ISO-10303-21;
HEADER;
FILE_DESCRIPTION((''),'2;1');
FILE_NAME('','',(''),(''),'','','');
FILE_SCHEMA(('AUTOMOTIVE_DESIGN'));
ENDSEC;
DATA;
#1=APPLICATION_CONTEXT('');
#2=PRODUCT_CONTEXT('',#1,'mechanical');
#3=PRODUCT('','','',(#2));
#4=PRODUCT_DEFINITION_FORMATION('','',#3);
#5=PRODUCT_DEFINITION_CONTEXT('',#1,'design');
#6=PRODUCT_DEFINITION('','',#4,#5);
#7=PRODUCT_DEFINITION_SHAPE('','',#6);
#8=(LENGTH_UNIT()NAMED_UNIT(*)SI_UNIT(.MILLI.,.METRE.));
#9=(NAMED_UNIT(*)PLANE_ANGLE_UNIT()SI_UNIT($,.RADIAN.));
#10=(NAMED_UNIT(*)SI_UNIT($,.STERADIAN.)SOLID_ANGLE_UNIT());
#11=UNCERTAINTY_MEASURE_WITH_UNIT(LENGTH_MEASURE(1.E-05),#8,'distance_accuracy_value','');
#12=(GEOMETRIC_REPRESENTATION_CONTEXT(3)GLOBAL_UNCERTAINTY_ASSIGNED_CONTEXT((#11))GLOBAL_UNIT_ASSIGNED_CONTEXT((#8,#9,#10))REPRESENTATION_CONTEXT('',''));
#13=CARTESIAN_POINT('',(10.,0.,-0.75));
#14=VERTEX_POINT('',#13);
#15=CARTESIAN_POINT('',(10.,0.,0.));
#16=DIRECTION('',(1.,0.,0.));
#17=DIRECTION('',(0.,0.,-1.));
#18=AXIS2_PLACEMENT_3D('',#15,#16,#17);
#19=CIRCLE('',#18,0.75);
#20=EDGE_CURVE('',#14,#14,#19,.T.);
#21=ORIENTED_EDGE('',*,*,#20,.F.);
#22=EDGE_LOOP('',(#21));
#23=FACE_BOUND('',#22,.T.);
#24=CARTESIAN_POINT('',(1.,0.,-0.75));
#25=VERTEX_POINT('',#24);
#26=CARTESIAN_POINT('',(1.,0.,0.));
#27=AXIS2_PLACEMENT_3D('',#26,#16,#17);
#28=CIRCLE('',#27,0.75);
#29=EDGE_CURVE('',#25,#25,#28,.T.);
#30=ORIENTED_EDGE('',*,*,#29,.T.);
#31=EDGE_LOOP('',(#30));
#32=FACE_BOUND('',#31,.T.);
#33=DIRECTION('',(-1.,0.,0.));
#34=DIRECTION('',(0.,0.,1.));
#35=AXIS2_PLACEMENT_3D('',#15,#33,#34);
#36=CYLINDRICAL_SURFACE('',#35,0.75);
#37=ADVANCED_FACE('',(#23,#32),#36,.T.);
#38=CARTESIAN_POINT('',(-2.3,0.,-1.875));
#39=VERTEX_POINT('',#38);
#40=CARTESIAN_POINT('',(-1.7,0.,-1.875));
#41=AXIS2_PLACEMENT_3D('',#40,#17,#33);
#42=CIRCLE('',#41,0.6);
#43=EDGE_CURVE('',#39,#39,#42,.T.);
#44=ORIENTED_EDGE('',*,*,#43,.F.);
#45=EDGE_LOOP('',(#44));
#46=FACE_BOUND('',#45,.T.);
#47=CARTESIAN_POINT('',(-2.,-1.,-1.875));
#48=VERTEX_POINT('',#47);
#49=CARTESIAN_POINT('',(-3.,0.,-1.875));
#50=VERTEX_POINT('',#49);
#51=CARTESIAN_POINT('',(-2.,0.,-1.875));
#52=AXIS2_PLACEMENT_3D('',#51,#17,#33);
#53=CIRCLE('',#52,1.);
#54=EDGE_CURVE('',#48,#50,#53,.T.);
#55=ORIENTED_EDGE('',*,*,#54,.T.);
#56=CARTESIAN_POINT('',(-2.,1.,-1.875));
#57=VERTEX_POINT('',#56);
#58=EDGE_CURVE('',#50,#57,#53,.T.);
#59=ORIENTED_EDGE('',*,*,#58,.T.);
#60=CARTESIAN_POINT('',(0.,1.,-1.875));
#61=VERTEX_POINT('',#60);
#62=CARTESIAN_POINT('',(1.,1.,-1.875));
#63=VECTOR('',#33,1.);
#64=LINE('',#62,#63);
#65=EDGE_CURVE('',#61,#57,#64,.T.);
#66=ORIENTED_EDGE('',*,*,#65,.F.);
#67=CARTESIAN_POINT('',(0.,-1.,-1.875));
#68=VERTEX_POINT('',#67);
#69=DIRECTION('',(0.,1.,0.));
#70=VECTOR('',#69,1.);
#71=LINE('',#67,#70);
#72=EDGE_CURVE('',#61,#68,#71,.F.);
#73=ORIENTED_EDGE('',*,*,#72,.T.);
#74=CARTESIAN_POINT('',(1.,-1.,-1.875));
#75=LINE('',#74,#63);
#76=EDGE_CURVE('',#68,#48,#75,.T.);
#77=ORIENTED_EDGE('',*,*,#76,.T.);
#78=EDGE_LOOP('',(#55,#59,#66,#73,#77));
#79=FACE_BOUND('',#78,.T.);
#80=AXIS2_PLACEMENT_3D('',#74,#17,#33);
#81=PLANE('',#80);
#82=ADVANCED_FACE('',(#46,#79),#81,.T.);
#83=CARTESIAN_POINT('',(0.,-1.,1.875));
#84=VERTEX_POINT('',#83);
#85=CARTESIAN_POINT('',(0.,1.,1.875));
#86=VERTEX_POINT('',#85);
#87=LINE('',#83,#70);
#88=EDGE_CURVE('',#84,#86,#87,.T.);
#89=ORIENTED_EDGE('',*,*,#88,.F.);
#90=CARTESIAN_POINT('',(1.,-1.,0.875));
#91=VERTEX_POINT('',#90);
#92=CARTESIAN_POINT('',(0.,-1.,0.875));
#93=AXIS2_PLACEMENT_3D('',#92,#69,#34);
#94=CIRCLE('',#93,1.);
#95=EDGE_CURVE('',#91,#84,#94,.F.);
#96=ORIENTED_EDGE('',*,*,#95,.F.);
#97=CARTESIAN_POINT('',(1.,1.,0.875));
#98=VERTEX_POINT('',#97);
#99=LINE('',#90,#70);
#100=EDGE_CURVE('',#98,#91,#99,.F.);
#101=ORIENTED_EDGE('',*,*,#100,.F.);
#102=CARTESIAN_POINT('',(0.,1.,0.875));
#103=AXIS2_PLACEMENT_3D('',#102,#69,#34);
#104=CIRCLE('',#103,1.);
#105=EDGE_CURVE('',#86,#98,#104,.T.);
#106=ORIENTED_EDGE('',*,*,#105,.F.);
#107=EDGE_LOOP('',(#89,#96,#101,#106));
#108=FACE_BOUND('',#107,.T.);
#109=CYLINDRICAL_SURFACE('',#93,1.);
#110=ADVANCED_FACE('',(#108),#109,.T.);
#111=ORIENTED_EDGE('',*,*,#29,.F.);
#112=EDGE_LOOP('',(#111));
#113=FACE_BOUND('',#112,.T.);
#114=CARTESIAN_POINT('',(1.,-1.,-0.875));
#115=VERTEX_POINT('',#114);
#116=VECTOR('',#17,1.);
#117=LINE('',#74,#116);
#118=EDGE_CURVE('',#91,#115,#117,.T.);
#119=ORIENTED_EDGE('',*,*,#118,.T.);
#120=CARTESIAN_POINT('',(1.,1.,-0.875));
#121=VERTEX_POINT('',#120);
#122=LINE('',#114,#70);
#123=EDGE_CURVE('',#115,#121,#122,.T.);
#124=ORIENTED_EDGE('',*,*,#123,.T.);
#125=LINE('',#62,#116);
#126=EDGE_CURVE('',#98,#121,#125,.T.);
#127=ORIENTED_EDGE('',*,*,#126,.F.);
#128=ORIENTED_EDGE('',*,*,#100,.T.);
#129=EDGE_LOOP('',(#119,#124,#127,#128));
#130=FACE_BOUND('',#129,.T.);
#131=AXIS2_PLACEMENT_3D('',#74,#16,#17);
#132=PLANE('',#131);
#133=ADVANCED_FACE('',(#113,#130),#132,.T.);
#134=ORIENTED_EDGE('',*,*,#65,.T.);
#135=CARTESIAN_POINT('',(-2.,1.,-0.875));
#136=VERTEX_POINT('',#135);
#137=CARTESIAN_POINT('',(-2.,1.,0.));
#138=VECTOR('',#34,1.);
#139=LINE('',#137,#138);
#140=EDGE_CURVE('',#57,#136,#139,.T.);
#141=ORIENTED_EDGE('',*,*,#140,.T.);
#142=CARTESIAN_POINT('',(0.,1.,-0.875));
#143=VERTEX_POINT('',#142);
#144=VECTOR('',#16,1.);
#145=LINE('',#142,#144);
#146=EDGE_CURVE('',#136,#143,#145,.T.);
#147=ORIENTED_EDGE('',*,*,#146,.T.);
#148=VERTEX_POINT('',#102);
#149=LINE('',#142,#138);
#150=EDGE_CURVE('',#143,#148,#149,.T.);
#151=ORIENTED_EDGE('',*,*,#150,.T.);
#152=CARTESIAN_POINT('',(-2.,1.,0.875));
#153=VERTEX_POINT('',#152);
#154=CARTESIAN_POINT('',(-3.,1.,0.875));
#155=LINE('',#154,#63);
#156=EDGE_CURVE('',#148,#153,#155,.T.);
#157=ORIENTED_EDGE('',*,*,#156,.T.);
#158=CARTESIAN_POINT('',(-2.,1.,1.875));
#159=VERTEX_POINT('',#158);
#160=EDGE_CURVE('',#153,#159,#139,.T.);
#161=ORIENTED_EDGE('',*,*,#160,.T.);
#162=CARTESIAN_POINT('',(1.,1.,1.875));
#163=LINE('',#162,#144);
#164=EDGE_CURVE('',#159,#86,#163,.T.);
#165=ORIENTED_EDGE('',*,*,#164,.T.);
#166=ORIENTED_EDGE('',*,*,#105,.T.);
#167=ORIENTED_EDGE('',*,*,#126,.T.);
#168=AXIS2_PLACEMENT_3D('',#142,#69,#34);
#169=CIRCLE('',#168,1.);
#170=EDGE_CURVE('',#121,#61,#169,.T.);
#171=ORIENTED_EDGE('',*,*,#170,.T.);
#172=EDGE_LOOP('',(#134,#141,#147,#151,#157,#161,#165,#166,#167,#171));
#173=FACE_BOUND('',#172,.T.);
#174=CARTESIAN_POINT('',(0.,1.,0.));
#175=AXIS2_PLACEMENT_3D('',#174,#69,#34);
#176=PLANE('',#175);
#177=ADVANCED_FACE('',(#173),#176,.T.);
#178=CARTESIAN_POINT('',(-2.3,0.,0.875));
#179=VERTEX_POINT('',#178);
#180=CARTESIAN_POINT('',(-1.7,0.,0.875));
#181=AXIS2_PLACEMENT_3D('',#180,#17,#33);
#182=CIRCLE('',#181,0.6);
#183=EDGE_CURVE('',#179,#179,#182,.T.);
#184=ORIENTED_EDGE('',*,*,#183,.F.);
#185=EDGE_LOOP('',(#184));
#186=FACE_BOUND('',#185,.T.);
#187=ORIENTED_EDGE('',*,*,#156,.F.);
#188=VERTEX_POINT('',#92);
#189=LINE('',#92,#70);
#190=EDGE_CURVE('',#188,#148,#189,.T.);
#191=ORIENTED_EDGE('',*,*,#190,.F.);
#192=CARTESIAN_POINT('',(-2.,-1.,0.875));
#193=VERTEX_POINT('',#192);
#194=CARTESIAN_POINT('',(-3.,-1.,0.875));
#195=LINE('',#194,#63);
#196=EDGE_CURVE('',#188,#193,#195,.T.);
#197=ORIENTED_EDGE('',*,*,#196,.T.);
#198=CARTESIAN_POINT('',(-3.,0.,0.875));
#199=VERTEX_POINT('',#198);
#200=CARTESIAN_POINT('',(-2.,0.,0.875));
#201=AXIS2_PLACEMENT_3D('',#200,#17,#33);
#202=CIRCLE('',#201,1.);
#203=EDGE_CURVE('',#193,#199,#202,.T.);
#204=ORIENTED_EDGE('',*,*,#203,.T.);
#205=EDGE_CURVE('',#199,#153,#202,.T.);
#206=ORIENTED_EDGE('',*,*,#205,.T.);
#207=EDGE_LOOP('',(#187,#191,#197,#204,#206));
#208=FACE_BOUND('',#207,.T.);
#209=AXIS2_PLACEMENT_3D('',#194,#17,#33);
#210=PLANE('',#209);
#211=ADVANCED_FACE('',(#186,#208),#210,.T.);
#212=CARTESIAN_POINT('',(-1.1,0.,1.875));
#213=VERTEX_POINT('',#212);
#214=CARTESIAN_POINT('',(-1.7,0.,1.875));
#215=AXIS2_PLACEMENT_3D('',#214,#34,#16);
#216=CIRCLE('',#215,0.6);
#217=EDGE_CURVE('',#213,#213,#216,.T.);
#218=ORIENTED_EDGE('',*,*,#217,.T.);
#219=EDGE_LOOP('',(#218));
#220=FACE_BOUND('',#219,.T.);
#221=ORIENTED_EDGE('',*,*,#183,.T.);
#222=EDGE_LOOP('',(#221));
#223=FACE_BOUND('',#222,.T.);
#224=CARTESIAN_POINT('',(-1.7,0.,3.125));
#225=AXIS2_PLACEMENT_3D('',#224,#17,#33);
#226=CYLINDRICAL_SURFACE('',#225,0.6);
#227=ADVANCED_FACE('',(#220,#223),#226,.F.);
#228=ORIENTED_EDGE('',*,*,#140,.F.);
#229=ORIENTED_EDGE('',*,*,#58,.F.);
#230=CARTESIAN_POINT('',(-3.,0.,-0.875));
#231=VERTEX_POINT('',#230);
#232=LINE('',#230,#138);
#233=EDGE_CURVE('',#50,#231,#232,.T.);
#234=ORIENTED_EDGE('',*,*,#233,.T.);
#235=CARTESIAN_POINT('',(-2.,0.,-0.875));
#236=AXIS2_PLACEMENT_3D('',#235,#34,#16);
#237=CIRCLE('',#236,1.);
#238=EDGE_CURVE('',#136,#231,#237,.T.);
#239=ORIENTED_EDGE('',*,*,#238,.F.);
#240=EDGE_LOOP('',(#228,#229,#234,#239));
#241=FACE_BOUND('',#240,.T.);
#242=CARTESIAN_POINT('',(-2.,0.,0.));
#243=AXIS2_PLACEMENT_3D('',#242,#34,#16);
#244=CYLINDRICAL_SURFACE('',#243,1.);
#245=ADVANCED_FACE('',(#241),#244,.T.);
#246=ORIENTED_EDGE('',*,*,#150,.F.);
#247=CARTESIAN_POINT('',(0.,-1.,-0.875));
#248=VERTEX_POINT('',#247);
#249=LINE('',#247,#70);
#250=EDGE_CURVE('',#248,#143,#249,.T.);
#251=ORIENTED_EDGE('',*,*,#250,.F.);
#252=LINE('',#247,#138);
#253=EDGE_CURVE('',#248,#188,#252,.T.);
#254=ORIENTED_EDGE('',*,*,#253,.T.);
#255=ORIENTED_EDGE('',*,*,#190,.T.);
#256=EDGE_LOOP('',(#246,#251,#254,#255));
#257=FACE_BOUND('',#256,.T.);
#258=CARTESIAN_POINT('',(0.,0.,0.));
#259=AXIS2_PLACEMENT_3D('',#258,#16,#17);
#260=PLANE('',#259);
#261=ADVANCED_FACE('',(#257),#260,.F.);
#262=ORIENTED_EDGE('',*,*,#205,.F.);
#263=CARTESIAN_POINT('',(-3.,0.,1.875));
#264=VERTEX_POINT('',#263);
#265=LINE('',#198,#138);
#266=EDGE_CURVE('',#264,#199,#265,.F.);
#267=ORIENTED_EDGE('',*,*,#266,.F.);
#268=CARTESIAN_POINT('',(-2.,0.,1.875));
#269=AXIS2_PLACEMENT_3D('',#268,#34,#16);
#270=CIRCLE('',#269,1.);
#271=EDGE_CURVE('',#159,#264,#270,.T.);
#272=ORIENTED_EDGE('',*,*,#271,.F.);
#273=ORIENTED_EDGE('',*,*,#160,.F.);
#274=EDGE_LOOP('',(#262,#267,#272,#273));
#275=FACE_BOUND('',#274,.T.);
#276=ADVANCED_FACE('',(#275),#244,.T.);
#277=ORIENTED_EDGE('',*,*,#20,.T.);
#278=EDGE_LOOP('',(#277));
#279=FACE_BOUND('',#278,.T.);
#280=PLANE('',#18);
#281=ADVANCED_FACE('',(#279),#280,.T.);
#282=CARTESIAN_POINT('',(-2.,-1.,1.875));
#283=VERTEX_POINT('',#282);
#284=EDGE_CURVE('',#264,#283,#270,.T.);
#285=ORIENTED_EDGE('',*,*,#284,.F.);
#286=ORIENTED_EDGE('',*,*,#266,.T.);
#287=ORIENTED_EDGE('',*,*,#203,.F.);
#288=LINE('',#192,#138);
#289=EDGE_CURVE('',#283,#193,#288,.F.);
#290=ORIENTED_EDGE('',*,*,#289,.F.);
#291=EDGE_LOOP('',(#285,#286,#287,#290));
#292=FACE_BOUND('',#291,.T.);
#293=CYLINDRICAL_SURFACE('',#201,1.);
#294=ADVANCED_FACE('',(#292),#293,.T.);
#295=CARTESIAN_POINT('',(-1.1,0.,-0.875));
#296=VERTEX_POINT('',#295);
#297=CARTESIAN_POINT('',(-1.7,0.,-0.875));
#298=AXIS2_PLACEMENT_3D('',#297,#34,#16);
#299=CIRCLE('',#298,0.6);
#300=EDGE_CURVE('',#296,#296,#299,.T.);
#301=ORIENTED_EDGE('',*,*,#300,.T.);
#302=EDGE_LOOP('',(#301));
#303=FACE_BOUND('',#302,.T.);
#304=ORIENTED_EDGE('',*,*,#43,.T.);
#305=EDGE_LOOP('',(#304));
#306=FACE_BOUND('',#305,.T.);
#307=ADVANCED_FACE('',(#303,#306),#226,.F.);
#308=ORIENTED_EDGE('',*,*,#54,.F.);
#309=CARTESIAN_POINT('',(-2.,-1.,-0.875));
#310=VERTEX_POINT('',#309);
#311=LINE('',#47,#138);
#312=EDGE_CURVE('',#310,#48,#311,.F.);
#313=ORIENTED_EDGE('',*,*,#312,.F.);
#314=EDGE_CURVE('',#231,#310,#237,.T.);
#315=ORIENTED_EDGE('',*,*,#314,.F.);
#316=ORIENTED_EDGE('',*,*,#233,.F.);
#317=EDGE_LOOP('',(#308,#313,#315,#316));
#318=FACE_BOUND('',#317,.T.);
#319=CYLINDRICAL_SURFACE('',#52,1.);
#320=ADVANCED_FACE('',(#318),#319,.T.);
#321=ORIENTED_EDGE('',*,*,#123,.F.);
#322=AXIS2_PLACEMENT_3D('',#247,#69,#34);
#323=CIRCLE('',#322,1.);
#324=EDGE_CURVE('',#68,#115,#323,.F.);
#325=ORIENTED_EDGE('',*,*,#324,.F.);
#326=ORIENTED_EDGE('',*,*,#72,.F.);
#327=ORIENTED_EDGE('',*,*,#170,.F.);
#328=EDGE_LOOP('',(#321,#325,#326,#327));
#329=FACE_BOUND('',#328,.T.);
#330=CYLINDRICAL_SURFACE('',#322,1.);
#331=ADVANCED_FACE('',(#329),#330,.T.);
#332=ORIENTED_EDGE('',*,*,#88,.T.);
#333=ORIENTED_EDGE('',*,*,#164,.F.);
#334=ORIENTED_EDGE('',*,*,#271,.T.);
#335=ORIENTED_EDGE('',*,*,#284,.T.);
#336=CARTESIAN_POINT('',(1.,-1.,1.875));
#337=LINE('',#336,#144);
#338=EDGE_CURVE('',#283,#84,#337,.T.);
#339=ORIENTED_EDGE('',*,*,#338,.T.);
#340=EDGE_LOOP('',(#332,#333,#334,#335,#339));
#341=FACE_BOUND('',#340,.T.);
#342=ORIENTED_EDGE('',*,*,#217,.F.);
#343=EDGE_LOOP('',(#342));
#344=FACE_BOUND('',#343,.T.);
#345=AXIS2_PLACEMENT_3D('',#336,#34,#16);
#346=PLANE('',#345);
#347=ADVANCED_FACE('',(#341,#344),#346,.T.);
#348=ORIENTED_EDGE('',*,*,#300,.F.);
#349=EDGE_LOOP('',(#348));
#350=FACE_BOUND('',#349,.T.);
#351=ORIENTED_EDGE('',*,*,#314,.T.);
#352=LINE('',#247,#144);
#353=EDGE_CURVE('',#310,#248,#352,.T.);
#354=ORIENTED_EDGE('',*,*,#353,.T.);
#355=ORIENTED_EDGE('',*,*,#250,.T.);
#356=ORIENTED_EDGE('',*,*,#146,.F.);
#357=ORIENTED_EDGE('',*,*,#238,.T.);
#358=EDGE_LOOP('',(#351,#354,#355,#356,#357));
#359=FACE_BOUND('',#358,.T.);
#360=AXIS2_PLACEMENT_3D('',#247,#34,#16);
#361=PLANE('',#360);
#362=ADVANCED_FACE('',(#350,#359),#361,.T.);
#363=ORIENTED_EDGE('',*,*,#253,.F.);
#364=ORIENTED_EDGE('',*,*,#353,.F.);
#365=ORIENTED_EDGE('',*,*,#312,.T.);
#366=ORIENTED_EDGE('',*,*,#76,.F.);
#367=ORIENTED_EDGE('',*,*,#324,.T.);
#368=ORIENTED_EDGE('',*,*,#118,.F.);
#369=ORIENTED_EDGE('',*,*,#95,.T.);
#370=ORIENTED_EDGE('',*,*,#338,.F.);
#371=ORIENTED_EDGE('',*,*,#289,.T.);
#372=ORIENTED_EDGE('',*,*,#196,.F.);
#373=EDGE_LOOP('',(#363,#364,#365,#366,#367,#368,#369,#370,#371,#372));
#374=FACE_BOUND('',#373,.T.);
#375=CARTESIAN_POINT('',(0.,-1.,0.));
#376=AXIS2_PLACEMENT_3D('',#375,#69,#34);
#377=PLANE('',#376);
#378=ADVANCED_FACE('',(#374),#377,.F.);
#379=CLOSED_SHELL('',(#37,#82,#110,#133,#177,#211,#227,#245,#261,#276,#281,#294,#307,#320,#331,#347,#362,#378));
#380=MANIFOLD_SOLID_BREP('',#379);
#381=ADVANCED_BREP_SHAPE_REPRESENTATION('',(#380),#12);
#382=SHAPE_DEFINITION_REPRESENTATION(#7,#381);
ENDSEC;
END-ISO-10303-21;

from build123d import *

# Parameters (mm, degrees)
SKETCH1_R                = 0.75
BOSS_EXTRUDE1_DEPTH      = 10
BOSS_EXTRUDE2_DEPTH      = 1
BOSS_EXTRUDE2_DEPTH_BACK = 1
FILLET1_R                = 1
SKETCH3_R                = 0.6
CUT_EXTRUDE1_DEPTH       = 5


with BuildPart() as part:
    # Sketch1 → Boss-Extrude1 (new body)
    with BuildSketch(Plane(origin=(0, 0, 0), x_dir=(0, 0, -1), z_dir=(1, 0, 0))):
        Circle(SKETCH1_R)
    extrude(amount=BOSS_EXTRUDE1_DEPTH)

    # Sketch2 → Boss-Extrude2 (add, two sides: drawn at the far end of the back side and taken through both)
    with BuildSketch(Plane(origin=(0, 0, 0), x_dir=(1, 0, 0), z_dir=(0, 1, 0)).offset(-BOSS_EXTRUDE2_DEPTH_BACK)):
        Polygon((1, 1.875), (1, -1.875), (-3, -1.875), (-3, -0.875), (0, -0.875), (0, 0.875), (-3, 0.875), (-3, 1.875), align=None)
    extrude(amount=BOSS_EXTRUDE2_DEPTH + BOSS_EXTRUDE2_DEPTH_BACK)

    # Fillet1
    fillet1_edges = [part.edges().sort_by_distance(p)[0] for p in [
        (-3, 1, -1.375),
        (-3, -1, -1.375),
        (-3, -1, 1.375),
        (-3, 1, 1.375),
        (1, 0, -1.875),
        (1, 0, 1.875),
    ]]
    fillet(fillet1_edges, radius=FILLET1_R - 0.0001)  # a hair under: the kernel refuses the full size

    # Sketch3 → Cut-Extrude1 (cut)
    with BuildSketch(Plane(origin=(0, 0, -1.875), x_dir=(-1, 0, 0), z_dir=(0, 0, -1))):
        with Locations((1.7, 0)):
            Circle(SKETCH3_R)
    extrude(amount=-CUT_EXTRUDE1_DEPTH, mode=Mode.SUBTRACT)


solid = part.part
